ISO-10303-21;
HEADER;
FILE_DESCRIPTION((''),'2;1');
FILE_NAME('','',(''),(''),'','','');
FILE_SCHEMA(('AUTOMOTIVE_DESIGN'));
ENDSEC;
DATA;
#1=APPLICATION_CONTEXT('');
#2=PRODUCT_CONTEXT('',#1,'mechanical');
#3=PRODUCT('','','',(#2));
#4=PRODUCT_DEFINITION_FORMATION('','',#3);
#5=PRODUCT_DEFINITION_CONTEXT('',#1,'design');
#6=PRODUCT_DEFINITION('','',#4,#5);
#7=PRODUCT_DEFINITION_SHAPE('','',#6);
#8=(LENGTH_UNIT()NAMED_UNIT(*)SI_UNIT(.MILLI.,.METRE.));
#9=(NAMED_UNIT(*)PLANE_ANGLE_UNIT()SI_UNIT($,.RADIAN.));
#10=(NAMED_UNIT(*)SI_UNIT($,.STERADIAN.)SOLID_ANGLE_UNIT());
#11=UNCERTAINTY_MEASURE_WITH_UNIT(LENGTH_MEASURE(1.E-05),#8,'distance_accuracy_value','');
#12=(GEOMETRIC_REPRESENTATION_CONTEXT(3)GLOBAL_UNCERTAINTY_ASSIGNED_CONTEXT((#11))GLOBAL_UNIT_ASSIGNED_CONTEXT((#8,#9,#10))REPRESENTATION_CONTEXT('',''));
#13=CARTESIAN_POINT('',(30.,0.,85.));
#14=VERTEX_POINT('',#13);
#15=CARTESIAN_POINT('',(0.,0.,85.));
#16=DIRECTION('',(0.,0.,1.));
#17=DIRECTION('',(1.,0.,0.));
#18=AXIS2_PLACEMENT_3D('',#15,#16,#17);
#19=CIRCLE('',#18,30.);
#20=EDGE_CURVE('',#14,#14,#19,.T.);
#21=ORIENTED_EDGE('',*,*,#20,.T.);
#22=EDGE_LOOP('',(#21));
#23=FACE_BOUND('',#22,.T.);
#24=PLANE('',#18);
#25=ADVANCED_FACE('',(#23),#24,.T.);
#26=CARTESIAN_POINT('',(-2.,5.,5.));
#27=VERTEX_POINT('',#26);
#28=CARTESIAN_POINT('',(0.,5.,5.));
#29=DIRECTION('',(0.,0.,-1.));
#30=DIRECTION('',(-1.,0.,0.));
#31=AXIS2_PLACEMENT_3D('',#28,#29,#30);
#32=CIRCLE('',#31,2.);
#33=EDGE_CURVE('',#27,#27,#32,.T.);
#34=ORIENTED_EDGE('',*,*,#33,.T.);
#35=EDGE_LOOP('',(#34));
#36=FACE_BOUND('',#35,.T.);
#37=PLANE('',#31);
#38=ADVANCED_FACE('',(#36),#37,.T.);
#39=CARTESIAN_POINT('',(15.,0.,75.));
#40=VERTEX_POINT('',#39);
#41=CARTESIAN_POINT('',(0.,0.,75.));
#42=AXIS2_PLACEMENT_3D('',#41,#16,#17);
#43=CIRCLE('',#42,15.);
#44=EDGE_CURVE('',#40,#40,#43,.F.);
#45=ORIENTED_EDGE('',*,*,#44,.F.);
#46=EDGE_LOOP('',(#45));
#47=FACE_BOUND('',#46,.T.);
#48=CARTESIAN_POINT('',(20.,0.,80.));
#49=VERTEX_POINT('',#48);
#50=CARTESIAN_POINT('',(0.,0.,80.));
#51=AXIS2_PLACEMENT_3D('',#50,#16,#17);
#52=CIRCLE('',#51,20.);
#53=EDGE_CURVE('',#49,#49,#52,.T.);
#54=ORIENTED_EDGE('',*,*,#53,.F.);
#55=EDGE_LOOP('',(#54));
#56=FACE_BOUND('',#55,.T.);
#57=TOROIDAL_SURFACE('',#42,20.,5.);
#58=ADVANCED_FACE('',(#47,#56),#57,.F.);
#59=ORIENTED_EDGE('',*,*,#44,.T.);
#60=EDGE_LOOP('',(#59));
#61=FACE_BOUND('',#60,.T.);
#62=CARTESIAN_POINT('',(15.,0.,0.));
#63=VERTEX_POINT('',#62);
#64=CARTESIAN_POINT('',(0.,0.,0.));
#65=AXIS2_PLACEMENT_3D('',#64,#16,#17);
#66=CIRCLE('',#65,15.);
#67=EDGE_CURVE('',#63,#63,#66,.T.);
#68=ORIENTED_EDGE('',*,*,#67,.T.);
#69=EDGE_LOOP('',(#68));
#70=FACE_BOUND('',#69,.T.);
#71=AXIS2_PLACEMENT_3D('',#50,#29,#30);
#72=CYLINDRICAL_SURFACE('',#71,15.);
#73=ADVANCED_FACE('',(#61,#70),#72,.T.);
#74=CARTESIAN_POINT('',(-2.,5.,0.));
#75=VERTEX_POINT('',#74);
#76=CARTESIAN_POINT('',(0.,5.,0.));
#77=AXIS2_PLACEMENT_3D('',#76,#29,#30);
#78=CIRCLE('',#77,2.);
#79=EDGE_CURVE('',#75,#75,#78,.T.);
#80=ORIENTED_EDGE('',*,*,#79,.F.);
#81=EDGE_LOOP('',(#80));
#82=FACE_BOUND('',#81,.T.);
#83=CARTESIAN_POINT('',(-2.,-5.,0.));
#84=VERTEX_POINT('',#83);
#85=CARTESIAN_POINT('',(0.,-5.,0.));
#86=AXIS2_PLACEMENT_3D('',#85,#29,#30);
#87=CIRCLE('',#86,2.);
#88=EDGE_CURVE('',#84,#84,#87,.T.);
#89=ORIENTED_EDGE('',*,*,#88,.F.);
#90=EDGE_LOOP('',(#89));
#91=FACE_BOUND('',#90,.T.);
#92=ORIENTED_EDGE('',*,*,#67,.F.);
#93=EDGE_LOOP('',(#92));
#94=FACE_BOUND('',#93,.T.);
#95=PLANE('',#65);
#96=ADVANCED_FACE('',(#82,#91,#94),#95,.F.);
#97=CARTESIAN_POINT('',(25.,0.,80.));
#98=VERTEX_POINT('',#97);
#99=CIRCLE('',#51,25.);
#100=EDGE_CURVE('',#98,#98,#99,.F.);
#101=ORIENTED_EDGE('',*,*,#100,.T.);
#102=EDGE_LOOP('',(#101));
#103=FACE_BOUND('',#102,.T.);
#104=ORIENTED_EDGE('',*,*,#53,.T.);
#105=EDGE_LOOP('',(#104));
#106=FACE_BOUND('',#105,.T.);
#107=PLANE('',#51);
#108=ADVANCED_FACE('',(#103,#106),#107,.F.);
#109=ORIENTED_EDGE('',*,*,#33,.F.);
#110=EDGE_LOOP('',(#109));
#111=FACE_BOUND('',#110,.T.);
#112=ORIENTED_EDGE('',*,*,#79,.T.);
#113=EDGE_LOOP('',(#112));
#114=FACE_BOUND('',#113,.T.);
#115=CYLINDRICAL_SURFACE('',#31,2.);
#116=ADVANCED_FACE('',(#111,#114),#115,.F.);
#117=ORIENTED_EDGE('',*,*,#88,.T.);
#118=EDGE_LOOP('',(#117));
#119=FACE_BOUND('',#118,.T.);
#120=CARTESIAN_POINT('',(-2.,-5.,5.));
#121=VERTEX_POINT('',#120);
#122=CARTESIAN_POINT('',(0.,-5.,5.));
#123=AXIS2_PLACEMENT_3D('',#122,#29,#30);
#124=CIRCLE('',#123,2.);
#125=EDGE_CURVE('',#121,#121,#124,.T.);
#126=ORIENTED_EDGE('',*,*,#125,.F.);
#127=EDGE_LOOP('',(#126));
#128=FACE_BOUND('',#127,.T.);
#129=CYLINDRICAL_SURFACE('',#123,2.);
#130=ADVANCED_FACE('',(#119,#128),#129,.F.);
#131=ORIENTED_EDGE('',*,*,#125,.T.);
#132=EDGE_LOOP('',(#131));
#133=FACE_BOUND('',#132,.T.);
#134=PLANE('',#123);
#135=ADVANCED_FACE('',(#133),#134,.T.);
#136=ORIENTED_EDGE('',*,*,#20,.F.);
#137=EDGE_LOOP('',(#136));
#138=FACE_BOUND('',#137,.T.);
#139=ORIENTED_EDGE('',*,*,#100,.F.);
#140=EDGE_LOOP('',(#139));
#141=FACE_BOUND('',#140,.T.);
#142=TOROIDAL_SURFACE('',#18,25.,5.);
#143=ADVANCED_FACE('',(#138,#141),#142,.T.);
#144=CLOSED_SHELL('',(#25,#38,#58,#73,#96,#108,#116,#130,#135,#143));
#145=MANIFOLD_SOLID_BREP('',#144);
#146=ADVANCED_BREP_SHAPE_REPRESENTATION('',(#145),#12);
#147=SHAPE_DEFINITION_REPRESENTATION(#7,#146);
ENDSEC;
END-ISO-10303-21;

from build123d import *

# Parameters (mm, degrees)
SKETCH1_R           = 15
BOSS_EXTRUDE1_DEPTH = 80
SKETCH2_R           = 30
BOSS_EXTRUDE2_DEPTH = 5
FILLET1_R           = 5
SKETCH3_R           = 2
CUT_EXTRUDE1_DEPTH  = 5


with BuildPart() as part:
    # Sketch1 → Boss-Extrude1 (new body)
    with BuildSketch(Plane.XY):
        Circle(SKETCH1_R)
    extrude(amount=BOSS_EXTRUDE1_DEPTH)

    # Sketch2 → Boss-Extrude2 (add)
    with BuildSketch(Plane.XY.offset(80)):
        Circle(SKETCH2_R)
    extrude(amount=BOSS_EXTRUDE2_DEPTH)

    # Fillet1
    fillet1_edges = [part.edges().sort_by_distance(p)[0] for p in [
        (-15, 0, 80),
        (-30, 0, 80),
    ]]
    fillet(fillet1_edges, radius=FILLET1_R - 0.0001)  # a hair under: the kernel refuses the full size

    # Sketch3 → Cut-Extrude1 (cut)
    with BuildSketch(Plane(origin=(0, 0, 0), x_dir=(-1, 0, 0), z_dir=(0, 0, -1))):
        with Locations((0, 5)):
            Circle(SKETCH3_R)
        with Locations((0, -5)):
            Circle(SKETCH3_R)
    extrude(amount=-CUT_EXTRUDE1_DEPTH, mode=Mode.SUBTRACT)


solid = part.part
